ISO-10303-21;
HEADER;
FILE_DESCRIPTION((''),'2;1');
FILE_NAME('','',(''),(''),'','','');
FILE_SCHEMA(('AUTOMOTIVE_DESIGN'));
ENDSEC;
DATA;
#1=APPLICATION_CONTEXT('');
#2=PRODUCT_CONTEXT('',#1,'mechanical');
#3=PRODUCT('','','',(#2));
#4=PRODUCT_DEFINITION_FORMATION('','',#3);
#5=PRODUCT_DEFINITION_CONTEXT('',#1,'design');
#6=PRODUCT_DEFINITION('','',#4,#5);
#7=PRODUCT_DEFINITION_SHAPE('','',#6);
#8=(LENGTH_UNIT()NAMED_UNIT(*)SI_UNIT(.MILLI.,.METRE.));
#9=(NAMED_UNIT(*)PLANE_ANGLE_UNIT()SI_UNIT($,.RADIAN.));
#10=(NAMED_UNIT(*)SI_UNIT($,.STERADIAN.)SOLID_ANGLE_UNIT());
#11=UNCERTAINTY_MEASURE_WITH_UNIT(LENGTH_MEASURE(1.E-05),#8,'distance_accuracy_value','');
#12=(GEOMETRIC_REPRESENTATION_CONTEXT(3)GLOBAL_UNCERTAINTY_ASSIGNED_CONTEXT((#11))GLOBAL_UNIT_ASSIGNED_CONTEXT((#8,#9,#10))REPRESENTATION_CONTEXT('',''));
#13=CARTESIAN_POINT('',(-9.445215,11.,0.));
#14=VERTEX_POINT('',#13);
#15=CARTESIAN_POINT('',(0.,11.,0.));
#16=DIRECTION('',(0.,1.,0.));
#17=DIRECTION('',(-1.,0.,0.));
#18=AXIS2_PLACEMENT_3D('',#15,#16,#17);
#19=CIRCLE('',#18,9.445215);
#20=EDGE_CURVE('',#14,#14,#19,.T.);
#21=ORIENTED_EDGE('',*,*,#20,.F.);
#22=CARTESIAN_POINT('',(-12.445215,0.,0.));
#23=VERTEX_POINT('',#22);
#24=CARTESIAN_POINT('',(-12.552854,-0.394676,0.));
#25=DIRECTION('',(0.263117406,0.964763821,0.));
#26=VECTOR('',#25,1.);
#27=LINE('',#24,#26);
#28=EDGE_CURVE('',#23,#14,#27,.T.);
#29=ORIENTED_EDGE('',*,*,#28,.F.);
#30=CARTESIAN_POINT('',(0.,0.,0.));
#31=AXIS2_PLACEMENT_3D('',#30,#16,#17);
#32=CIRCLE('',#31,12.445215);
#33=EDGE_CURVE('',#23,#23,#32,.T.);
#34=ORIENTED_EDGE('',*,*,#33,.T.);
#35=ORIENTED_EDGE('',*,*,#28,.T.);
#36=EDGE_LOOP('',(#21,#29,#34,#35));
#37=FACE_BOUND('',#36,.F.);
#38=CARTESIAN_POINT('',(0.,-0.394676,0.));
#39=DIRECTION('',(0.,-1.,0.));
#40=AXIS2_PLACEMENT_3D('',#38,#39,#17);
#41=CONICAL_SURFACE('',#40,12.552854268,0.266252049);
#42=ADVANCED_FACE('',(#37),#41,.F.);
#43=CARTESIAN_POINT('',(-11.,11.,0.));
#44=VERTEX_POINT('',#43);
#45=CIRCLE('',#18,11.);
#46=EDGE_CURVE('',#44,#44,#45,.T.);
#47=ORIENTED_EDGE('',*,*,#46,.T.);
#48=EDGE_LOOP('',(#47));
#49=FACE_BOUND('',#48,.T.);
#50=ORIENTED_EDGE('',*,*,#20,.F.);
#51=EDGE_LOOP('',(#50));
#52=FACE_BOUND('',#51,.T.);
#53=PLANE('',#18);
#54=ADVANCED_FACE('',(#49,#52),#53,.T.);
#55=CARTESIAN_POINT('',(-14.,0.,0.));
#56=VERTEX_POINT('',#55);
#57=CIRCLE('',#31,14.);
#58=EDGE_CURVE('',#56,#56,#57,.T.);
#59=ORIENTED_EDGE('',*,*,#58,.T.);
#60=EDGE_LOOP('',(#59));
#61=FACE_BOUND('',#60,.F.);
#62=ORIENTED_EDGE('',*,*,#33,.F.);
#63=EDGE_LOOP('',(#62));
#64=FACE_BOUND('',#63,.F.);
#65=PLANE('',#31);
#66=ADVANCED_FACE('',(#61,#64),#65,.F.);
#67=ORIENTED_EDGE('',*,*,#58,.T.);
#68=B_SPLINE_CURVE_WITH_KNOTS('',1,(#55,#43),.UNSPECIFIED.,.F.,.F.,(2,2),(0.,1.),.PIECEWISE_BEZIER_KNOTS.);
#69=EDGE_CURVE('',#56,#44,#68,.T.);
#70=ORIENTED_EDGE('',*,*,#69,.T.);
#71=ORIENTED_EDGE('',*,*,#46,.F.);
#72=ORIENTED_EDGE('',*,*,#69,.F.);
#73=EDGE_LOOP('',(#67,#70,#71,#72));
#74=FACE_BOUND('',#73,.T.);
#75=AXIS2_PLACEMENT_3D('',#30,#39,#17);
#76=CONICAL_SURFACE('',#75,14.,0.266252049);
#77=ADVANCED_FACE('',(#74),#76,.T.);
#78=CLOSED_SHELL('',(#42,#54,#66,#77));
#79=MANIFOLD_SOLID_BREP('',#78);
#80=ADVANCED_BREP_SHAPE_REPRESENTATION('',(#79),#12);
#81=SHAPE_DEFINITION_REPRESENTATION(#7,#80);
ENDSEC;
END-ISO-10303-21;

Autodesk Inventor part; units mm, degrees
ref_plane "YZ Plane" through (0, 0, 0) normal (1, 0, 0) x (0, 1, 0)
ref_plane "XY Plane" through (0, 0, 0) normal (0, 0, 1) x (1, 0, 0)
sketch "Szkic6" plane through (0, 0, 0) normal (0, 1, 0) x (-1, 0, 0)
  circle A0 centre (0, 0) radius 14
  dimension "d33" = 28
ref_plane "Płaszczyzna konstrukcyjna1" through (0, 11, 0) normal (0, 1, 0) x (-1, 0, 0)
sketch "Szkic7" plane through (0, 11, 0) normal (0, 1, 0) x (-1, 0, 0)
  circle A0 centre (0, 0) radius 11
  dimension "d35" = 22
loft "Wyciągnięcie złożone1" add profiles "Szkic6", "Szkic7"
shell "Skorupa1" thickness 1.5 removed faces 2 at (3.2467, 11, -1.704) at (-0.5625, 0, 1.5565)
equation "\"d33\" = OD1"
equation "\"d35\" = OD2"
equation "\"d52\" = THK"
equation "\"SzerokośćGięciaPodcięcia\" = Grubość"
equation "\"RozmiarPodcięciaNarożnika\" = 4 * Grubość"
equation "\"PromieńPrzejścia\" = PromieńGięcia"
equation "\"Rozmiar_promienia_Jacobiego\" = PromieńGięcia"
equation "\"Wielk_odstępu\" = Grubość"
equation "\"d2\" = PromieńGięcia"
equation "\"d23\" = PromieńGięcia"
equation "\"OD1\" = 28"
equation "\"OD2\" = 22"
equation "\"L\" = 11"
equation "\"THK\" = 1.5"
equation "\"d34\" = L"
equation "\"Grubość\" = 1.5"
equation "\"PromieńGięcia\" = 3"
properties part number "Redukcja symetryczna Ø28x22x1,5 L=11" material "304"
